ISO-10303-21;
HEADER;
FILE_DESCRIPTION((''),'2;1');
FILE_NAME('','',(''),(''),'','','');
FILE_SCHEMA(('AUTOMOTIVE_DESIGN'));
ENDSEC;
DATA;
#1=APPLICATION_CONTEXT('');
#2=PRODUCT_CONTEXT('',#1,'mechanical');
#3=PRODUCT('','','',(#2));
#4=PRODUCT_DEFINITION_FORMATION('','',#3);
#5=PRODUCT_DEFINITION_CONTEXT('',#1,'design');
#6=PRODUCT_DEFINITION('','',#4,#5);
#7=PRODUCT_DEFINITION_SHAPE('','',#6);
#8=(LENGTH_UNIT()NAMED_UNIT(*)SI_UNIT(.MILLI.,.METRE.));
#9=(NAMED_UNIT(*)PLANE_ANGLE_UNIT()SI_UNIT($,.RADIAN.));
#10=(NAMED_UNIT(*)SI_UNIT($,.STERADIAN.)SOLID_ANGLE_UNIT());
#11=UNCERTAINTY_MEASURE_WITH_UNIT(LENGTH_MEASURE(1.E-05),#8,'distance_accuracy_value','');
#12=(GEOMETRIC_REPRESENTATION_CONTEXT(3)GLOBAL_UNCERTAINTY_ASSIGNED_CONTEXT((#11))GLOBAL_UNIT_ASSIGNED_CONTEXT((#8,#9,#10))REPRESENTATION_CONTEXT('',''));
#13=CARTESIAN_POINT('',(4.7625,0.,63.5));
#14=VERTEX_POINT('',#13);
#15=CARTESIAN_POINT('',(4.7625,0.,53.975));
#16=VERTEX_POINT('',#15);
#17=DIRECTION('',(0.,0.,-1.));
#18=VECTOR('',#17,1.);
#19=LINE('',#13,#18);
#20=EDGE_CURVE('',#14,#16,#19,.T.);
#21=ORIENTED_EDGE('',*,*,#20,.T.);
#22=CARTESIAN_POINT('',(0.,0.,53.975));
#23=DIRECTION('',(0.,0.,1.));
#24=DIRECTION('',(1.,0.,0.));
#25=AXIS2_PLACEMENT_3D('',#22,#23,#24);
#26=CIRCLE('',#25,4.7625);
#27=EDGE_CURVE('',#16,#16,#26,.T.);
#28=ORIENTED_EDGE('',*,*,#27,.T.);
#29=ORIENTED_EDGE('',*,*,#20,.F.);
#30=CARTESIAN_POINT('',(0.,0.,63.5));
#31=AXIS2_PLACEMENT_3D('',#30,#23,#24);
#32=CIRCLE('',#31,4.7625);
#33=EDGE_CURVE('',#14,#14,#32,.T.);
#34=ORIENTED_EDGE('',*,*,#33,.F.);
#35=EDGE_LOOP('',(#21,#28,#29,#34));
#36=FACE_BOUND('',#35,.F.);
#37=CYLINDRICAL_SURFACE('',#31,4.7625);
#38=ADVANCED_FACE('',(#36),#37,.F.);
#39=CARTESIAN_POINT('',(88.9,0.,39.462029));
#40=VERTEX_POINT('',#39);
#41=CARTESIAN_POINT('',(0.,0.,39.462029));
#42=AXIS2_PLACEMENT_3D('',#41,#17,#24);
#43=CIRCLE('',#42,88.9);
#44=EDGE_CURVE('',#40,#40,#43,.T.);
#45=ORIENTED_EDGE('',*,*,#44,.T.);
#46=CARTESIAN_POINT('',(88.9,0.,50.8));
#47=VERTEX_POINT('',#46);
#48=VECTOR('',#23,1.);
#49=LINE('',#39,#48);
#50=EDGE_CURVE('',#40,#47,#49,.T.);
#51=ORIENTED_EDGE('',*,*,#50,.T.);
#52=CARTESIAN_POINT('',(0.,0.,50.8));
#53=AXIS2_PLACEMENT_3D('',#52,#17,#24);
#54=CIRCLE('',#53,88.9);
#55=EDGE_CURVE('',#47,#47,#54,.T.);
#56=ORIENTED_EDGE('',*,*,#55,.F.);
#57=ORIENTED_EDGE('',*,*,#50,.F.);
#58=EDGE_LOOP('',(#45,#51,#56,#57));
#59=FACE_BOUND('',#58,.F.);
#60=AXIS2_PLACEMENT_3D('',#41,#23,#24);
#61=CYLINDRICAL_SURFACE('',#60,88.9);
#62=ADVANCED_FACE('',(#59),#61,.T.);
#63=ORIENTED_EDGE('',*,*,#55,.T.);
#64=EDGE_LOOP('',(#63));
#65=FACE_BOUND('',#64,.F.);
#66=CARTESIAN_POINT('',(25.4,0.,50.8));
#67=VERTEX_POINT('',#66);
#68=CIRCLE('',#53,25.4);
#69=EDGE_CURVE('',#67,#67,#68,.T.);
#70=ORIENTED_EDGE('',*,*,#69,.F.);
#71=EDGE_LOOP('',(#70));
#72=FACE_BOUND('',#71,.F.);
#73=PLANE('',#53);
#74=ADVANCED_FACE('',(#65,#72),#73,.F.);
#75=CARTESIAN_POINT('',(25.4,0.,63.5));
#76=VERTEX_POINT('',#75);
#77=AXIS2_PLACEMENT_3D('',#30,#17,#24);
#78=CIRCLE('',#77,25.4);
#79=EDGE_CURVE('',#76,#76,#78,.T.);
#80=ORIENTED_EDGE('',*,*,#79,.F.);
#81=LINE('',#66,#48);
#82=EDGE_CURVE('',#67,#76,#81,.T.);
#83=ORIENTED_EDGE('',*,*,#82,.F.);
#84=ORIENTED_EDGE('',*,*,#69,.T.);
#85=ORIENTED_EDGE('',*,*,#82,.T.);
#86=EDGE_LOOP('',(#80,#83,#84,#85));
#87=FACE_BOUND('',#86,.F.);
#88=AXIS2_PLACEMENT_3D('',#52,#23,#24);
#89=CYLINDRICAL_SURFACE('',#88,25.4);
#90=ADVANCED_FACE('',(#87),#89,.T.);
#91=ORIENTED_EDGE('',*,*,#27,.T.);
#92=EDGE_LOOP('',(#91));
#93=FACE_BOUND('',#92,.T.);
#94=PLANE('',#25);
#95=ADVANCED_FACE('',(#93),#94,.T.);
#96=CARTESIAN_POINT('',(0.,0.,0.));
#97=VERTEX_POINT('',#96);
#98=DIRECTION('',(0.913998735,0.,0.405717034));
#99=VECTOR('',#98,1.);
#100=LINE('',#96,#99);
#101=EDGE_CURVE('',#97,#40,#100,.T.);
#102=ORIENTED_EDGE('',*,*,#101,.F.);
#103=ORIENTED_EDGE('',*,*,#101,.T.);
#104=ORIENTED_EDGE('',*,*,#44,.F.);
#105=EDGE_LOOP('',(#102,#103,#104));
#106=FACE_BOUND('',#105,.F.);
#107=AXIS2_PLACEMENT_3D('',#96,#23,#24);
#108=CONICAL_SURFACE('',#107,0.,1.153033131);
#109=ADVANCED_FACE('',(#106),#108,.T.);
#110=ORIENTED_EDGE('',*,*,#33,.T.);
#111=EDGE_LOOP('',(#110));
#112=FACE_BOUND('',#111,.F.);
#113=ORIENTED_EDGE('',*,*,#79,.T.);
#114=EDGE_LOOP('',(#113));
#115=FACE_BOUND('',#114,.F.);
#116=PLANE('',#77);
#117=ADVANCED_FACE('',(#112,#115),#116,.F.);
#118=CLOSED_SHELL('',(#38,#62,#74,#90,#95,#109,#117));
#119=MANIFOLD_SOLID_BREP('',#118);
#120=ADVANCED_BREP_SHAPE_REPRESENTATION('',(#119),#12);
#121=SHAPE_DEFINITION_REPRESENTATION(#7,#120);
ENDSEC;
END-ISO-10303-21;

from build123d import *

# Parameters (mm, degrees)
F2_R     = 4.7625
F3_DEPTH = 9.525


# Not quite as in the source:
# - the program builds the solid bodies; features that only make, move or delete a surface that nothing else refers to are left out


with BuildPart() as f1:
    # F0 (on Front) → F1 (revolve)
    with BuildSketch(Plane.XZ):
        Polygon((0, 63.5), (0, 0), (88.9, 39.4620286852), (88.9, 50.8), (25.4, 50.8), (25.4, 63.5), align=None)
    revolve(axis=Axis((0, 0, 31.75), (0, 0, -1)))

    # F2 (on face) → F3 (cut)
    with BuildSketch(Plane.XY.offset(63.5)):
        Circle(F2_R)
    extrude(amount=-F3_DEPTH, mode=Mode.SUBTRACT)


solid = f1.part
